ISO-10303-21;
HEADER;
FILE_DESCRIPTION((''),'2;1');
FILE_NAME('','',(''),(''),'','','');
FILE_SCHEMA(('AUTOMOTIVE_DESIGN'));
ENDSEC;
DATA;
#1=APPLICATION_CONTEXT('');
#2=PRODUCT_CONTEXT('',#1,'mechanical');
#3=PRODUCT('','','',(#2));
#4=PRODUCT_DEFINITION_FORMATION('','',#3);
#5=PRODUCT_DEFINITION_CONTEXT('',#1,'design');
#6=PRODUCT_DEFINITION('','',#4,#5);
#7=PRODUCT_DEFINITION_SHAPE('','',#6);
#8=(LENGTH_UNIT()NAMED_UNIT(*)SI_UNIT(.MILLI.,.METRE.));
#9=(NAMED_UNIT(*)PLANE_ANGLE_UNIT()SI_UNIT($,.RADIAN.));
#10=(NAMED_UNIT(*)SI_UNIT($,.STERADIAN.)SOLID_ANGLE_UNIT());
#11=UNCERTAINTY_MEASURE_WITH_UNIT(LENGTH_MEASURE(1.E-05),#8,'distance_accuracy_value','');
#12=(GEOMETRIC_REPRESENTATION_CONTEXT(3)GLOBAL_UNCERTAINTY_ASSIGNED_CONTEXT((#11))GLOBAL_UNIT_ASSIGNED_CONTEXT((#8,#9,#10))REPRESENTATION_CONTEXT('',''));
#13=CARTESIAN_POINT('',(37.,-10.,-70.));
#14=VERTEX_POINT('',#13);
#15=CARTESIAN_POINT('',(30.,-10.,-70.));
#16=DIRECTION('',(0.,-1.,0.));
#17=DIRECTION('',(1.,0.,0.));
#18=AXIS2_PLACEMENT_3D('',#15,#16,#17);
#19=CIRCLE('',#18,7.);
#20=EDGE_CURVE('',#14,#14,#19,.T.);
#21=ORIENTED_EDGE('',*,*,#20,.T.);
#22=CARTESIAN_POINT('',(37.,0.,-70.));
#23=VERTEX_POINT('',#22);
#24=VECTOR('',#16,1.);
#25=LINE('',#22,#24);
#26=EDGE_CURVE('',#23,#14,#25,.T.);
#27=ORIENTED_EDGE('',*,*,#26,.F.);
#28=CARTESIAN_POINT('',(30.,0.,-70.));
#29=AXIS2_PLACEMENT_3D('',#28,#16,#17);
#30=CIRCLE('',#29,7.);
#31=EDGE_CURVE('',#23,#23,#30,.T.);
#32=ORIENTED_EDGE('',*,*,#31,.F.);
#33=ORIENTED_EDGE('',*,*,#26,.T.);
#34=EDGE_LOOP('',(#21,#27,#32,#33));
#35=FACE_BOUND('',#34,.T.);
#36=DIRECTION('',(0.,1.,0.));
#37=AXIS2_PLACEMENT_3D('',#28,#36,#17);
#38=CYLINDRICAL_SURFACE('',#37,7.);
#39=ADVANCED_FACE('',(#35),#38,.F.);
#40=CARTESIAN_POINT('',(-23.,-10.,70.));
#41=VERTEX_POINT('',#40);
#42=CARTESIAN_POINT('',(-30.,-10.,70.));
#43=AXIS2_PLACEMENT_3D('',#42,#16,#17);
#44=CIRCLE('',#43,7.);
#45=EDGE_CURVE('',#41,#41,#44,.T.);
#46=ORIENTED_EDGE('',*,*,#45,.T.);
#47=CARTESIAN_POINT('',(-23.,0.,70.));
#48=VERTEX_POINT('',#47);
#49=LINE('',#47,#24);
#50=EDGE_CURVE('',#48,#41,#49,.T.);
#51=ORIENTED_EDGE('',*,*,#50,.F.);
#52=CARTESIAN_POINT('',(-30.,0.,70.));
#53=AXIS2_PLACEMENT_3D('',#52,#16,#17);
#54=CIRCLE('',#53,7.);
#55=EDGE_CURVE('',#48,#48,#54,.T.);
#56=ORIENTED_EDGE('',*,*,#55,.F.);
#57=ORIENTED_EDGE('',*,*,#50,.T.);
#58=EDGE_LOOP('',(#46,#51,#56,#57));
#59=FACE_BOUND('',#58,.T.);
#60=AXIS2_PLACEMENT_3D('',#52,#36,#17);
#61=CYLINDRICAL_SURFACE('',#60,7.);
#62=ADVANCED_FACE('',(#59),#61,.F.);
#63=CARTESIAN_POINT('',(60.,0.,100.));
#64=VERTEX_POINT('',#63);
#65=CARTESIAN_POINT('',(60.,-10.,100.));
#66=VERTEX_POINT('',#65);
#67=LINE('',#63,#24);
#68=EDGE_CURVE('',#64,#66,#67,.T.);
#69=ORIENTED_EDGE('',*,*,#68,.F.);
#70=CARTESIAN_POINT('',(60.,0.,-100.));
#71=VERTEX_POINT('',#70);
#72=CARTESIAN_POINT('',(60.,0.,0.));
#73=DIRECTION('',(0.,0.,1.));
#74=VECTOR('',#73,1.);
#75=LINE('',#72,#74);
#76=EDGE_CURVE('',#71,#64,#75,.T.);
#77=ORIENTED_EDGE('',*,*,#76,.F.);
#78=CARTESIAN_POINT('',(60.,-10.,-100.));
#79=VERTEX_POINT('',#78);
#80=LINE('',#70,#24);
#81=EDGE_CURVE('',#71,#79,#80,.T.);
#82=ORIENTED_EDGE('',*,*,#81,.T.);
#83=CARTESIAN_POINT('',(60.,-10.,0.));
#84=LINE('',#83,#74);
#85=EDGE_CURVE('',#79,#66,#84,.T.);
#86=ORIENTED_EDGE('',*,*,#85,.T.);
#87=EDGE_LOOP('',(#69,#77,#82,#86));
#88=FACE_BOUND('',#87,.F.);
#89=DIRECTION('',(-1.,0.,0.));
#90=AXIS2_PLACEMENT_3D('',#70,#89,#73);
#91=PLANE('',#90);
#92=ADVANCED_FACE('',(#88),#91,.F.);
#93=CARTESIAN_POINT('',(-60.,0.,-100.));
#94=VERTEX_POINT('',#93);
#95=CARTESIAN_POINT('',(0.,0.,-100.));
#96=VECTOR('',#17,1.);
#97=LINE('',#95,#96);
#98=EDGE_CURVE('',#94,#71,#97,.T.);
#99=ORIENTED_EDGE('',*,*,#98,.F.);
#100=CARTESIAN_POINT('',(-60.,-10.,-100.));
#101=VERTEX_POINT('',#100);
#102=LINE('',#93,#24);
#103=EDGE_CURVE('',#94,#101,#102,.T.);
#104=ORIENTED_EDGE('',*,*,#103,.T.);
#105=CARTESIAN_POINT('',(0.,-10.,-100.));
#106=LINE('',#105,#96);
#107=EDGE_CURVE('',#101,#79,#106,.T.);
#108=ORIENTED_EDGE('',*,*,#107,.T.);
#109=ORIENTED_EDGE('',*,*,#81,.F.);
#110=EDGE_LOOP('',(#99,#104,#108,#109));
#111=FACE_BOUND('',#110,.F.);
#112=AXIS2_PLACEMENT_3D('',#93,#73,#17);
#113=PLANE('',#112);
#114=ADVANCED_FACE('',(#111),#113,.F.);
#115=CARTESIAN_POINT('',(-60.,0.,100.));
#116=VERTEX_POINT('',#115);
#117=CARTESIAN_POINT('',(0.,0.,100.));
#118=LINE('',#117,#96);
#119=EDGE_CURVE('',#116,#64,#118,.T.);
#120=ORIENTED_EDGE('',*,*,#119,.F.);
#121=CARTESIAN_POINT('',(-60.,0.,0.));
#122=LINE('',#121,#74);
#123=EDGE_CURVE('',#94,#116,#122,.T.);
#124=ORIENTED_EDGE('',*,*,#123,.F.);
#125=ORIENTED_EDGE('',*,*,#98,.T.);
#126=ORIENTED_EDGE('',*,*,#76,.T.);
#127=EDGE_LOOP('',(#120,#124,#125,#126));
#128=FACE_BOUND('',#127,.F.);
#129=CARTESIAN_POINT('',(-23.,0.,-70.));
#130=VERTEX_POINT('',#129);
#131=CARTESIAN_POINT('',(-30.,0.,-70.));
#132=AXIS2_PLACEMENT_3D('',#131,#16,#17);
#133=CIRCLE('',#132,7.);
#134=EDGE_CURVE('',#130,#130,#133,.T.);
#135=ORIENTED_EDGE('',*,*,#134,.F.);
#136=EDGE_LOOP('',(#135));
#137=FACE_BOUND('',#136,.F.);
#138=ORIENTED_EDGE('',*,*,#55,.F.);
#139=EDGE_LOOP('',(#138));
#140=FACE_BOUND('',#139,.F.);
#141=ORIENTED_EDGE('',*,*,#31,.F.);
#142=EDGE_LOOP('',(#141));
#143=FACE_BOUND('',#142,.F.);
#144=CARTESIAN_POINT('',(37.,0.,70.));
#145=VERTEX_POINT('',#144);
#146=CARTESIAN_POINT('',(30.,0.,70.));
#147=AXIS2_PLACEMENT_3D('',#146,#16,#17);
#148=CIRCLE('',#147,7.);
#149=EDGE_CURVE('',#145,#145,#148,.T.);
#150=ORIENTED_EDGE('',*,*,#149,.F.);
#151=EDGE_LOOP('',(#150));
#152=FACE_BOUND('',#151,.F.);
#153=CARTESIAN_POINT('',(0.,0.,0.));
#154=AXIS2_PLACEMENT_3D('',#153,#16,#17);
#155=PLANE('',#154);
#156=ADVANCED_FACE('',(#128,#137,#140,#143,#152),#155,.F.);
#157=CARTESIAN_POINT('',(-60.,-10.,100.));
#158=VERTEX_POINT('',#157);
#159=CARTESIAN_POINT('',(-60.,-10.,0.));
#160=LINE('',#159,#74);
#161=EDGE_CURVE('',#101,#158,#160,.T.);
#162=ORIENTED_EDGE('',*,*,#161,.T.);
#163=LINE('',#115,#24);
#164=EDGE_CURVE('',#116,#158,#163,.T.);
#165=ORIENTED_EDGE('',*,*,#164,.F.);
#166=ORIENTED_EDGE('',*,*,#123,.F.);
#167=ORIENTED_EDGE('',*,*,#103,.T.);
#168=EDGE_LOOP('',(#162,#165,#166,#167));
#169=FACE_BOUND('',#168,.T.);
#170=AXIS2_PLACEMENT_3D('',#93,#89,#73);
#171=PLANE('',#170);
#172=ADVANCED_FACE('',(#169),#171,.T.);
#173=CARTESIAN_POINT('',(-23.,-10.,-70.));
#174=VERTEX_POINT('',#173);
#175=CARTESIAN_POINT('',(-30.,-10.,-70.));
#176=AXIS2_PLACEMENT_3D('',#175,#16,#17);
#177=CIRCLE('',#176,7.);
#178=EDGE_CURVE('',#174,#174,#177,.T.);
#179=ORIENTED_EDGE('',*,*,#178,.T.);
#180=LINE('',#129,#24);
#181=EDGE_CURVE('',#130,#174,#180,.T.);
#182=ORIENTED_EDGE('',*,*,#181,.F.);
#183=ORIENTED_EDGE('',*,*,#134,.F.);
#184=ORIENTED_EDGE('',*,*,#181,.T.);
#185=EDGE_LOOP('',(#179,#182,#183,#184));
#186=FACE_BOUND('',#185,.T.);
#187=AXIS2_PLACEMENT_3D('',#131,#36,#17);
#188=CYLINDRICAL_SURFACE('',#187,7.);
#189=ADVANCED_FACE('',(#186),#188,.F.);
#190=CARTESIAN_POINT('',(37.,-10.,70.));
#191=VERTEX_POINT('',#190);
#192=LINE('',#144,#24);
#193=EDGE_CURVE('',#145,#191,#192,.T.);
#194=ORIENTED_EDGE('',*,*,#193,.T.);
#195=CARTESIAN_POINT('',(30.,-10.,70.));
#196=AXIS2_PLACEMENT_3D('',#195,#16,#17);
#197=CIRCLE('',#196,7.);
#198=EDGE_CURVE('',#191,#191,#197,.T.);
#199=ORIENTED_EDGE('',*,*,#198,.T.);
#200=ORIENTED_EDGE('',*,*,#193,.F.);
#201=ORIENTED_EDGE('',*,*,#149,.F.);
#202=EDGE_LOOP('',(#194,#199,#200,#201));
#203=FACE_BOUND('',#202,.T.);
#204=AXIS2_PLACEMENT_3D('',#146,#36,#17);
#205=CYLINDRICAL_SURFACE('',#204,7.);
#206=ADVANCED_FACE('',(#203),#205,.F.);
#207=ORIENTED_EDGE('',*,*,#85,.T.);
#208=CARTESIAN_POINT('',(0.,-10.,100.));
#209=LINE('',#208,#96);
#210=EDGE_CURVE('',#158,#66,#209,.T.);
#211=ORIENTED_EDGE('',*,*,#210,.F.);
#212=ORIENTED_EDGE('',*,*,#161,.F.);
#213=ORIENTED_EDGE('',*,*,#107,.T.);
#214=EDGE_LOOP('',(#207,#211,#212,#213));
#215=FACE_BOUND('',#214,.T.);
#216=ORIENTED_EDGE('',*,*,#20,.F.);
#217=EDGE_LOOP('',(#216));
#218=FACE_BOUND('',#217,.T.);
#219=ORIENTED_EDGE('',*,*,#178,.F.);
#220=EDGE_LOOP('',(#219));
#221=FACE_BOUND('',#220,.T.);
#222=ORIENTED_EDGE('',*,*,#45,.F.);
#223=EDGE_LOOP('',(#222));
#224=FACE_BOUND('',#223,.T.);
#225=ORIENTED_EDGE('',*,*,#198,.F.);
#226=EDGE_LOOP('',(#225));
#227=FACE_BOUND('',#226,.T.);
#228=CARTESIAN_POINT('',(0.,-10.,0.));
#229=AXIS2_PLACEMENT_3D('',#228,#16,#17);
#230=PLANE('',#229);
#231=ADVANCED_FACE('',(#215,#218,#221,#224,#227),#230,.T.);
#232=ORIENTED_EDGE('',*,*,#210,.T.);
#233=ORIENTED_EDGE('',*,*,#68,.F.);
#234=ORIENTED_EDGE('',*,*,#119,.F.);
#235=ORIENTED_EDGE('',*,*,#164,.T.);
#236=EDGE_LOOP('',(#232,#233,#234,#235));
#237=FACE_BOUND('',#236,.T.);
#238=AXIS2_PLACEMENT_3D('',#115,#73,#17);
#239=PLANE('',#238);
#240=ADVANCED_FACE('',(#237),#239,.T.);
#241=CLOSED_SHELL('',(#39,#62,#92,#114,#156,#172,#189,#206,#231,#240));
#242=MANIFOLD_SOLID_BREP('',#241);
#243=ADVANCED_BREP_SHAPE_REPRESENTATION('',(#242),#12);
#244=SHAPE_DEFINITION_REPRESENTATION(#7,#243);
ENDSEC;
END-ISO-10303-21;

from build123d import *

# Parameters (mm, degrees)
F0_W     = 120
F0_H     = 200
F0_R     = 7
F1_DEPTH = 10


# Not quite as in the source:
# - a feature names something its author has since deleted; it is built from what else it names


with BuildPart() as f1:
    # F0 (on Front) → F1 (new body)
    with BuildSketch(Plane.XZ):
        Rectangle(F0_W, F0_H)
        with Locations((-30, -70)):
            Circle(F0_R, mode=Mode.SUBTRACT)
        with Locations((30, -70)):
            Circle(F0_R, mode=Mode.SUBTRACT)
        with Locations((-30, 70)):
            Circle(F0_R, mode=Mode.SUBTRACT)
        with Locations((30, 70)):
            Circle(F0_R, mode=Mode.SUBTRACT)
    extrude(amount=F1_DEPTH)


solid = f1.part
